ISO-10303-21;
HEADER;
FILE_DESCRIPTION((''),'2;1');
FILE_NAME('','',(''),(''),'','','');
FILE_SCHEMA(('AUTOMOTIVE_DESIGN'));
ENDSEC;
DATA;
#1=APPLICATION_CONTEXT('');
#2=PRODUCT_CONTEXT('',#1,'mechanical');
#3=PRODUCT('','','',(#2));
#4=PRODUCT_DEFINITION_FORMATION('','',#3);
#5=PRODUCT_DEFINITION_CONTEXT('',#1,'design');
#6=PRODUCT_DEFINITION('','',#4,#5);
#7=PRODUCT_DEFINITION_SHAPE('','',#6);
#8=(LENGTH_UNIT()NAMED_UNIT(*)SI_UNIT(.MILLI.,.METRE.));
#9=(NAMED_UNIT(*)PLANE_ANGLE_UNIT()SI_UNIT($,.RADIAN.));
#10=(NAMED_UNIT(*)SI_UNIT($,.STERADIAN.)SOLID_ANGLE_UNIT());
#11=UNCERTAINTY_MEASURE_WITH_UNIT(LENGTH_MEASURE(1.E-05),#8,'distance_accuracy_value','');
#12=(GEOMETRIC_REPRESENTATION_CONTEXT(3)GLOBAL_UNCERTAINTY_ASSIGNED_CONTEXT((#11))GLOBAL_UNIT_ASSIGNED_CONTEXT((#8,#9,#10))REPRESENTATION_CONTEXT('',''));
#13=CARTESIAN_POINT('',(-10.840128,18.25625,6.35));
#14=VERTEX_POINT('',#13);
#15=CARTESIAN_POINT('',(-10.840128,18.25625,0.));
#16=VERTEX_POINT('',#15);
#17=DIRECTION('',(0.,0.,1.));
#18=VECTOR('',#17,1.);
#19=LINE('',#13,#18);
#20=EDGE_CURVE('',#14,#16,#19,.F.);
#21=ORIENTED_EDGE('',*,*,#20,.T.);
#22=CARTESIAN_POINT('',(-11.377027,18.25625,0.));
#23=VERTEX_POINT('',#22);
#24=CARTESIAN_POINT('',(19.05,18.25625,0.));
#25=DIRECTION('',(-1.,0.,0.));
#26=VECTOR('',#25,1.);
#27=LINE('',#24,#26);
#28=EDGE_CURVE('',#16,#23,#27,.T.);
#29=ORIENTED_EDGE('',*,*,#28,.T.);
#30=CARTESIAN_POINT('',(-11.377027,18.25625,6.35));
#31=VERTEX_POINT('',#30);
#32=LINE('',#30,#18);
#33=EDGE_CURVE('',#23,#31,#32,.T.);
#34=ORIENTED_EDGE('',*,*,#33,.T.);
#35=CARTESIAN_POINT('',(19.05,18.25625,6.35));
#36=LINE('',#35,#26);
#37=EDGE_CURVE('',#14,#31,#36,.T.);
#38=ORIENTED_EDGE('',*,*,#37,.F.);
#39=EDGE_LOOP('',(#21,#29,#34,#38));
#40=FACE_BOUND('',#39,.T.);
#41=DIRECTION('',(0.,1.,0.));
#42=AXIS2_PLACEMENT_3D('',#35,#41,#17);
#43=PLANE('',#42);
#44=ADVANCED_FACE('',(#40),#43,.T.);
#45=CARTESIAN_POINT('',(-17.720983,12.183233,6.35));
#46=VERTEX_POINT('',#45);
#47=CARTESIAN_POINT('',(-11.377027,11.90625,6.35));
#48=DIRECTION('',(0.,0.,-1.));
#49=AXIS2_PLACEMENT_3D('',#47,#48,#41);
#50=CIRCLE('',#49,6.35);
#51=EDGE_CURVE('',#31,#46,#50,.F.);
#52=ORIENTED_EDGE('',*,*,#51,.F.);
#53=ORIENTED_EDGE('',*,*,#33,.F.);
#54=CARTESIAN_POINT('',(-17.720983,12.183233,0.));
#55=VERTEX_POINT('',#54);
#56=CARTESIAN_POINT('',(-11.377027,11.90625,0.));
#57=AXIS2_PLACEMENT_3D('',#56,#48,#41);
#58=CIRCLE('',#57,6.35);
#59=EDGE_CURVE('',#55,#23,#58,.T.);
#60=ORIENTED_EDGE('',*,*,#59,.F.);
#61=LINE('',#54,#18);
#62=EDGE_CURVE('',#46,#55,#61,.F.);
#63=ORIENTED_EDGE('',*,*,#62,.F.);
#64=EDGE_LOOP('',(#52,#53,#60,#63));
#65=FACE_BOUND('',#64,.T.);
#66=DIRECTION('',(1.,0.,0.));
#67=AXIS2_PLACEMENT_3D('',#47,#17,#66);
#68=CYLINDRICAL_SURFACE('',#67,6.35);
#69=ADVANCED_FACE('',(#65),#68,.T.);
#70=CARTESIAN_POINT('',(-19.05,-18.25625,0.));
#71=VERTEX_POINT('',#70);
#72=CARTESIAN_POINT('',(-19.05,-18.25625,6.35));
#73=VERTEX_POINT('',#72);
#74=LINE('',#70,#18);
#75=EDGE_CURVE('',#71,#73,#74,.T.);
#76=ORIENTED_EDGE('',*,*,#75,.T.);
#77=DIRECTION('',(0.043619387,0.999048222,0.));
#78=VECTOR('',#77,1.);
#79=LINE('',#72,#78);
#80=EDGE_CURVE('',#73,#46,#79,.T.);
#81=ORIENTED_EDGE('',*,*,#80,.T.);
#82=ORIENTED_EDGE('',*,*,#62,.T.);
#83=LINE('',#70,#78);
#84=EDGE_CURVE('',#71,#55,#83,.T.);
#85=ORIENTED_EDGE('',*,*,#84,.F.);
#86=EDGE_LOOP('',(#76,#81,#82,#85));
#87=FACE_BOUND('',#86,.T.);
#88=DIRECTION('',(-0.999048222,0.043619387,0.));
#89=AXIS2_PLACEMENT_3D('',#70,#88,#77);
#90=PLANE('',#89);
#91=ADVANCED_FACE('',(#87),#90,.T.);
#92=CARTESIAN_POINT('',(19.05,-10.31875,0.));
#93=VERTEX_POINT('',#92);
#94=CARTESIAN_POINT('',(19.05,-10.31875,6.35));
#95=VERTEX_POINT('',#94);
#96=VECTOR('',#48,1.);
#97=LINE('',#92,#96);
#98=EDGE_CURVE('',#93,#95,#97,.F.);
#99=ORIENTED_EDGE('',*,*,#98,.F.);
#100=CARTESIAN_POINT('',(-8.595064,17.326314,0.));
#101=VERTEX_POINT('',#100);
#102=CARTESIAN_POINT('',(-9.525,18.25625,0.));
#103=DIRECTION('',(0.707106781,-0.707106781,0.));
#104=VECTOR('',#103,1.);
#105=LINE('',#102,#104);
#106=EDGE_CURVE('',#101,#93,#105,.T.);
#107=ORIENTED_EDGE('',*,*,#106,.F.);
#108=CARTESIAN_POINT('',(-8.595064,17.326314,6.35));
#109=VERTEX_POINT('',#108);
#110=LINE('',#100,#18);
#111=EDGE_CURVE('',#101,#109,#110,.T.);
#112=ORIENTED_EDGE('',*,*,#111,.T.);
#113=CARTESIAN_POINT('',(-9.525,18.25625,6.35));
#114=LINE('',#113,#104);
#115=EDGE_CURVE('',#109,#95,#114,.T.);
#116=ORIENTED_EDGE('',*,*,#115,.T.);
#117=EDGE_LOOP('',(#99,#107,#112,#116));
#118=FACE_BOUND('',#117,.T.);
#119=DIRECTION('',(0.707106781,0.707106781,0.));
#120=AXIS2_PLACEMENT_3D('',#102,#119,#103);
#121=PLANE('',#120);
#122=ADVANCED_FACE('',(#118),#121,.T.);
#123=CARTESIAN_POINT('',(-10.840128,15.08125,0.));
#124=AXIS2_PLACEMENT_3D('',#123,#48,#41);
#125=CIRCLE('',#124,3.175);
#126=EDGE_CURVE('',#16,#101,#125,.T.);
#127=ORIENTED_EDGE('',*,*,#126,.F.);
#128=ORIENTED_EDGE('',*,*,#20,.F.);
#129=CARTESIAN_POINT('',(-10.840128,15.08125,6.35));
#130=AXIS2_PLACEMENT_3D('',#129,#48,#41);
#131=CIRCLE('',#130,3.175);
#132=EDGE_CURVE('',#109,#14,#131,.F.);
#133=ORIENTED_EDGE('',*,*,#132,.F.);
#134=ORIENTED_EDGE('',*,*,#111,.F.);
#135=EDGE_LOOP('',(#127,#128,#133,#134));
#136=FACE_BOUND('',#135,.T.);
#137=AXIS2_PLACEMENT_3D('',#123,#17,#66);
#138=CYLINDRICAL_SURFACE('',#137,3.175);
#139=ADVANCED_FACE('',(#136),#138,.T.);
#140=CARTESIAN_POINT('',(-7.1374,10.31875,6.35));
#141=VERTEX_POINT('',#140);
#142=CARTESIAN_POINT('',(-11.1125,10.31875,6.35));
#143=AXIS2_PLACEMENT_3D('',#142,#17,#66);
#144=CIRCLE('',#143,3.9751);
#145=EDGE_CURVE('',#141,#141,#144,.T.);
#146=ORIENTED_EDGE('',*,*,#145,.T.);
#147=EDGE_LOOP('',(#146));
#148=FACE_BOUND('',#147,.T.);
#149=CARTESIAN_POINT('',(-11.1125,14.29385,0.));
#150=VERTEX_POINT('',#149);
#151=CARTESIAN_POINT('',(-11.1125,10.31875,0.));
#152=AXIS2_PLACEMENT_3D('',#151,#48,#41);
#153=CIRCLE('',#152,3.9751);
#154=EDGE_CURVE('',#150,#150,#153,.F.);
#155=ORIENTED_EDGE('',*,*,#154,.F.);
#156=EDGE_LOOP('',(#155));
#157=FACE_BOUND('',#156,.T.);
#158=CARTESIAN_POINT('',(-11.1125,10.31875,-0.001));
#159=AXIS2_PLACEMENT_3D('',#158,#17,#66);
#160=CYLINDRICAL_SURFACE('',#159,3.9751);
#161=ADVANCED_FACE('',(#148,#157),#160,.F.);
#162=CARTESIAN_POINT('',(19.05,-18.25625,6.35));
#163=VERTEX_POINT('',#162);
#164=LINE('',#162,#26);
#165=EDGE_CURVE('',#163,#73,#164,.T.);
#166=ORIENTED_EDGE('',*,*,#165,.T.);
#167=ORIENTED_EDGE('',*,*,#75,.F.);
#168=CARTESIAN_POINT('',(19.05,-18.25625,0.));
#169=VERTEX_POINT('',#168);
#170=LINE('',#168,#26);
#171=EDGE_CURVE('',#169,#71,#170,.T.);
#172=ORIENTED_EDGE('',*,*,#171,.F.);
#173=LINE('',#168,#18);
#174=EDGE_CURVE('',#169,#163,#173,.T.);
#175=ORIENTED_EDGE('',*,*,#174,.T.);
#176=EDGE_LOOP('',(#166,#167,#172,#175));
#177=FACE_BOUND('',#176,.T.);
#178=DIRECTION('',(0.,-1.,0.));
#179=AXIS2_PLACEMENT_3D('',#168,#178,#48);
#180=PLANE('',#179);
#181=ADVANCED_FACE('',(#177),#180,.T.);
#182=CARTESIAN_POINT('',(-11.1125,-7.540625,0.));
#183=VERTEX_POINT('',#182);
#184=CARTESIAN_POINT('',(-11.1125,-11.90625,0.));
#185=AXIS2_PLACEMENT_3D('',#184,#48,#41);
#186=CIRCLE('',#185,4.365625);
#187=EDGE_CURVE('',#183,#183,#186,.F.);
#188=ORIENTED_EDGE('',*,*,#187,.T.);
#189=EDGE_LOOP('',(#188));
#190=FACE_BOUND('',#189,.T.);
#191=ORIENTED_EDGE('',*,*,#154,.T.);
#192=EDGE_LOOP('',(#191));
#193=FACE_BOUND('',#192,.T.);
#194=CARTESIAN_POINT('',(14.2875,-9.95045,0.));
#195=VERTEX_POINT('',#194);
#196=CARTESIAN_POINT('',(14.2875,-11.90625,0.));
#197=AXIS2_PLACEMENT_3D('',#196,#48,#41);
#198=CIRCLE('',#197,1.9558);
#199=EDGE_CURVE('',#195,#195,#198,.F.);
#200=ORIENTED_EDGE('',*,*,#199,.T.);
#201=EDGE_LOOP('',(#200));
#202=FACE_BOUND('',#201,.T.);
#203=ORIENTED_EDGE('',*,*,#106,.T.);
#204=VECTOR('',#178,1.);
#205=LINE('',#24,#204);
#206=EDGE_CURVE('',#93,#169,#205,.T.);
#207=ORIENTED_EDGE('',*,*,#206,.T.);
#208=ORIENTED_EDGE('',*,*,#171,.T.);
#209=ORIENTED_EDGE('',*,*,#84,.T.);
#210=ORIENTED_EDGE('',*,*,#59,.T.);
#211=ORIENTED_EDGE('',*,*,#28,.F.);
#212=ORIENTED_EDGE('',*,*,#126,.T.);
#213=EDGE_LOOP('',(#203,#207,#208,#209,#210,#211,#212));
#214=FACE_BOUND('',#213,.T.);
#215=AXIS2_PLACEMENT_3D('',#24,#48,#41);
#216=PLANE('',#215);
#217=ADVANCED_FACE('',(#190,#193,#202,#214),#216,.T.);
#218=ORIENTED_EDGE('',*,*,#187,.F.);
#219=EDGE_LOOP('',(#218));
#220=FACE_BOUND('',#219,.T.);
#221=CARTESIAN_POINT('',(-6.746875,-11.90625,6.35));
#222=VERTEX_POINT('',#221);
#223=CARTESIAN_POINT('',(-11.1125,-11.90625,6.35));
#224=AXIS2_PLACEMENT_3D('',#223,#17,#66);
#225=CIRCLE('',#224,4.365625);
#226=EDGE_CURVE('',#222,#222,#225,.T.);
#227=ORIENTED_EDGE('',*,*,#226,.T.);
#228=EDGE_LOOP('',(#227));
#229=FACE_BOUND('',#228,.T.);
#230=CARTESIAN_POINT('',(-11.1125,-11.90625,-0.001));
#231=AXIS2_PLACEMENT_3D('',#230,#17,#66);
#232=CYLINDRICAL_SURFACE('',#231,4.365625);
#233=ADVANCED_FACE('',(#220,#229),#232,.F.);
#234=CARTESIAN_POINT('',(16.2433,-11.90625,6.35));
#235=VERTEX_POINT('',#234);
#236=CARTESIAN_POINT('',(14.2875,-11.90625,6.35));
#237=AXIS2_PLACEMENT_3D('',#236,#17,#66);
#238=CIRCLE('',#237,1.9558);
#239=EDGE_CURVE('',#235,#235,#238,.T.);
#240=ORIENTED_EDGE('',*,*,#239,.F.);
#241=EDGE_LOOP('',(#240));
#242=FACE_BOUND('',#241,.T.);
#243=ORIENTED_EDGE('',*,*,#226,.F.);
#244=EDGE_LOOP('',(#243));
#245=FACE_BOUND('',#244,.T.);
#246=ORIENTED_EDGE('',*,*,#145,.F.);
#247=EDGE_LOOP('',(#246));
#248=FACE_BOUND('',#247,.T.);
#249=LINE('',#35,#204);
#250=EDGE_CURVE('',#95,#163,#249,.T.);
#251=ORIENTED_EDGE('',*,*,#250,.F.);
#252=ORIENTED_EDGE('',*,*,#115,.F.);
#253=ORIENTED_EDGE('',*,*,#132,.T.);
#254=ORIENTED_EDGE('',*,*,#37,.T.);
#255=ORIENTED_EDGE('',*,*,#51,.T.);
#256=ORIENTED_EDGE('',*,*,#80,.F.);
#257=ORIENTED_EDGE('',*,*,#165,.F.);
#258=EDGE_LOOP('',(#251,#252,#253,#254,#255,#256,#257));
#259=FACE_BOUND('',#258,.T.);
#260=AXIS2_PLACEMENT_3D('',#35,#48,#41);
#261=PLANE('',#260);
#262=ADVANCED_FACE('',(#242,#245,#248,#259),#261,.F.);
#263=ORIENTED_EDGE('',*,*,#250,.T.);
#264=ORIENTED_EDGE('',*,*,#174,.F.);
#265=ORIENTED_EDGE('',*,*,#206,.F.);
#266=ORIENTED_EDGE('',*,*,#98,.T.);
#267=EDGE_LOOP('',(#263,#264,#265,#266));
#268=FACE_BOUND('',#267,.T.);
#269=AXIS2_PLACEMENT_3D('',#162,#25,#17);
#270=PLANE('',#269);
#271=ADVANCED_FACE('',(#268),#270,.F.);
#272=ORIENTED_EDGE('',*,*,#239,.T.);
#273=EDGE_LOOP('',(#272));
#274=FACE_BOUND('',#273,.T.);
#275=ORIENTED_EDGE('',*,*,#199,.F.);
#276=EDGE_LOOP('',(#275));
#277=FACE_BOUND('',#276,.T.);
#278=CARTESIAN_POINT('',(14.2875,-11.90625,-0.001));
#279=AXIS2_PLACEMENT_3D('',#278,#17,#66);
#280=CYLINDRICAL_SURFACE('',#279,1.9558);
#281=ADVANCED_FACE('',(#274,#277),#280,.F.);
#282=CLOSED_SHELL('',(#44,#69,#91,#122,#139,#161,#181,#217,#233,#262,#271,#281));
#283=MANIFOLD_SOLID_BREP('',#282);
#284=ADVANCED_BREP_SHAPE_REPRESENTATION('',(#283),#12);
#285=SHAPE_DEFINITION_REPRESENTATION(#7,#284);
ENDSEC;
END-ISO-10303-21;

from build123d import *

# Parameters (mm, degrees)
SKETCH1_W          = 6.35
SKETCH1_H          = 36.5125
BASE_FLANGE1_DEPTH = 19.05
CUT_EXTRUDE1_REACH = 29.139
CUT_EXTRUDE2_REACH = 29.139
SKETCH4_R          = 4.365625
SKETCH4_R_2        = 1.9558
SKETCH4_R_3        = 3.9751
FILLET1_R          = 6.35
FILLET2_R          = 3.175


# Sheet-metal steps are written as plain solids
with BuildPart() as part:
    # Sketch1 → Base-Flange1 (new, symmetric)
    with BuildSketch(Plane(origin=(0, 0, 0), x_dir=(0, 0, -1), z_dir=(1, 0, 0))):
        with Locations((-3.175, 0)):
            Rectangle(SKETCH1_W, SKETCH1_H)
    extrude(amount=BASE_FLANGE1_DEPTH, both=True)

    # Sketch3 → Cut-Extrude1 (cut, up to next)
    with BuildSketch(Plane.XY.offset(6.35), mode=Mode.PRIVATE) as cut_extrude1_sk1:
        Polygon((-19.05, 18.25625), (-19.05, -18.25625), (-17.455829822, 18.25625), align=None)
    cut_extrude1_tool1 = extrude(cut_extrude1_sk1.sketch, amount=-CUT_EXTRUDE1_REACH, mode=Mode.PRIVATE) & part.part
    # Sketch3 → Cut-Extrude1 (cut, up to next)
    with BuildSketch(Plane.XY.offset(6.35), mode=Mode.PRIVATE) as cut_extrude1_sk2:
        Polygon((19.05, 18.25625), (19.05, -10.31875), (-9.525, 18.25625), align=None)
    cut_extrude1_tool2 = extrude(cut_extrude1_sk2.sketch, amount=-CUT_EXTRUDE1_REACH, mode=Mode.PRIVATE) & part.part
    add(cut_extrude1_tool1.solids().sort_by_distance((-18.51861, 6.085417, 6.35))[0], mode=Mode.SUBTRACT)
    add(cut_extrude1_tool2.solids().sort_by_distance((9.525, 8.73125, 6.35))[0], mode=Mode.SUBTRACT)

    # Sketch4 → Cut-Extrude2 (cut, up to next)
    with BuildSketch(Plane.XY.offset(6.35), mode=Mode.PRIVATE) as cut_extrude2_sk1:
        with Locations((-11.1125, -11.90625)):
            Circle(SKETCH4_R)
    cut_extrude2_tool1 = extrude(cut_extrude2_sk1.sketch, amount=-CUT_EXTRUDE2_REACH, mode=Mode.PRIVATE) & part.part
    # Sketch4 → Cut-Extrude2 (cut, up to next)
    with BuildSketch(Plane.XY.offset(6.35), mode=Mode.PRIVATE) as cut_extrude2_sk2:
        with Locations((14.2875, -11.90625)):
            Circle(SKETCH4_R_2)
    cut_extrude2_tool2 = extrude(cut_extrude2_sk2.sketch, amount=-CUT_EXTRUDE2_REACH, mode=Mode.PRIVATE) & part.part
    # Sketch4 → Cut-Extrude2 (cut, up to next)
    with BuildSketch(Plane.XY.offset(6.35), mode=Mode.PRIVATE) as cut_extrude2_sk3:
        with Locations((-11.1125, 10.31875)):
            Circle(SKETCH4_R_3)
    cut_extrude2_tool3 = extrude(cut_extrude2_sk3.sketch, amount=-CUT_EXTRUDE2_REACH, mode=Mode.PRIVATE) & part.part
    add(cut_extrude2_tool1.solids().sort_by_distance((-11.1125, -11.90625, 6.35))[0], mode=Mode.SUBTRACT)
    add(cut_extrude2_tool2.solids().sort_by_distance((14.2875, -11.90625, 6.35))[0], mode=Mode.SUBTRACT)
    add(cut_extrude2_tool3.solids().sort_by_distance((-11.1125, 10.31875, 6.35))[0], mode=Mode.SUBTRACT)

    # Fillet1
    fillet1_edges = [part.edges().sort_by_distance(p)[0] for p in [
        (-17.455829822, 18.25625, 3.175),
    ]]
    fillet(fillet1_edges, radius=FILLET1_R)

    # Fillet2
    fillet2_edges = [part.edges().sort_by_distance(p)[0] for p in [
        (-9.525, 18.25625, 3.175),
    ]]
    fillet(fillet2_edges, radius=FILLET2_R)


solid = part.part
